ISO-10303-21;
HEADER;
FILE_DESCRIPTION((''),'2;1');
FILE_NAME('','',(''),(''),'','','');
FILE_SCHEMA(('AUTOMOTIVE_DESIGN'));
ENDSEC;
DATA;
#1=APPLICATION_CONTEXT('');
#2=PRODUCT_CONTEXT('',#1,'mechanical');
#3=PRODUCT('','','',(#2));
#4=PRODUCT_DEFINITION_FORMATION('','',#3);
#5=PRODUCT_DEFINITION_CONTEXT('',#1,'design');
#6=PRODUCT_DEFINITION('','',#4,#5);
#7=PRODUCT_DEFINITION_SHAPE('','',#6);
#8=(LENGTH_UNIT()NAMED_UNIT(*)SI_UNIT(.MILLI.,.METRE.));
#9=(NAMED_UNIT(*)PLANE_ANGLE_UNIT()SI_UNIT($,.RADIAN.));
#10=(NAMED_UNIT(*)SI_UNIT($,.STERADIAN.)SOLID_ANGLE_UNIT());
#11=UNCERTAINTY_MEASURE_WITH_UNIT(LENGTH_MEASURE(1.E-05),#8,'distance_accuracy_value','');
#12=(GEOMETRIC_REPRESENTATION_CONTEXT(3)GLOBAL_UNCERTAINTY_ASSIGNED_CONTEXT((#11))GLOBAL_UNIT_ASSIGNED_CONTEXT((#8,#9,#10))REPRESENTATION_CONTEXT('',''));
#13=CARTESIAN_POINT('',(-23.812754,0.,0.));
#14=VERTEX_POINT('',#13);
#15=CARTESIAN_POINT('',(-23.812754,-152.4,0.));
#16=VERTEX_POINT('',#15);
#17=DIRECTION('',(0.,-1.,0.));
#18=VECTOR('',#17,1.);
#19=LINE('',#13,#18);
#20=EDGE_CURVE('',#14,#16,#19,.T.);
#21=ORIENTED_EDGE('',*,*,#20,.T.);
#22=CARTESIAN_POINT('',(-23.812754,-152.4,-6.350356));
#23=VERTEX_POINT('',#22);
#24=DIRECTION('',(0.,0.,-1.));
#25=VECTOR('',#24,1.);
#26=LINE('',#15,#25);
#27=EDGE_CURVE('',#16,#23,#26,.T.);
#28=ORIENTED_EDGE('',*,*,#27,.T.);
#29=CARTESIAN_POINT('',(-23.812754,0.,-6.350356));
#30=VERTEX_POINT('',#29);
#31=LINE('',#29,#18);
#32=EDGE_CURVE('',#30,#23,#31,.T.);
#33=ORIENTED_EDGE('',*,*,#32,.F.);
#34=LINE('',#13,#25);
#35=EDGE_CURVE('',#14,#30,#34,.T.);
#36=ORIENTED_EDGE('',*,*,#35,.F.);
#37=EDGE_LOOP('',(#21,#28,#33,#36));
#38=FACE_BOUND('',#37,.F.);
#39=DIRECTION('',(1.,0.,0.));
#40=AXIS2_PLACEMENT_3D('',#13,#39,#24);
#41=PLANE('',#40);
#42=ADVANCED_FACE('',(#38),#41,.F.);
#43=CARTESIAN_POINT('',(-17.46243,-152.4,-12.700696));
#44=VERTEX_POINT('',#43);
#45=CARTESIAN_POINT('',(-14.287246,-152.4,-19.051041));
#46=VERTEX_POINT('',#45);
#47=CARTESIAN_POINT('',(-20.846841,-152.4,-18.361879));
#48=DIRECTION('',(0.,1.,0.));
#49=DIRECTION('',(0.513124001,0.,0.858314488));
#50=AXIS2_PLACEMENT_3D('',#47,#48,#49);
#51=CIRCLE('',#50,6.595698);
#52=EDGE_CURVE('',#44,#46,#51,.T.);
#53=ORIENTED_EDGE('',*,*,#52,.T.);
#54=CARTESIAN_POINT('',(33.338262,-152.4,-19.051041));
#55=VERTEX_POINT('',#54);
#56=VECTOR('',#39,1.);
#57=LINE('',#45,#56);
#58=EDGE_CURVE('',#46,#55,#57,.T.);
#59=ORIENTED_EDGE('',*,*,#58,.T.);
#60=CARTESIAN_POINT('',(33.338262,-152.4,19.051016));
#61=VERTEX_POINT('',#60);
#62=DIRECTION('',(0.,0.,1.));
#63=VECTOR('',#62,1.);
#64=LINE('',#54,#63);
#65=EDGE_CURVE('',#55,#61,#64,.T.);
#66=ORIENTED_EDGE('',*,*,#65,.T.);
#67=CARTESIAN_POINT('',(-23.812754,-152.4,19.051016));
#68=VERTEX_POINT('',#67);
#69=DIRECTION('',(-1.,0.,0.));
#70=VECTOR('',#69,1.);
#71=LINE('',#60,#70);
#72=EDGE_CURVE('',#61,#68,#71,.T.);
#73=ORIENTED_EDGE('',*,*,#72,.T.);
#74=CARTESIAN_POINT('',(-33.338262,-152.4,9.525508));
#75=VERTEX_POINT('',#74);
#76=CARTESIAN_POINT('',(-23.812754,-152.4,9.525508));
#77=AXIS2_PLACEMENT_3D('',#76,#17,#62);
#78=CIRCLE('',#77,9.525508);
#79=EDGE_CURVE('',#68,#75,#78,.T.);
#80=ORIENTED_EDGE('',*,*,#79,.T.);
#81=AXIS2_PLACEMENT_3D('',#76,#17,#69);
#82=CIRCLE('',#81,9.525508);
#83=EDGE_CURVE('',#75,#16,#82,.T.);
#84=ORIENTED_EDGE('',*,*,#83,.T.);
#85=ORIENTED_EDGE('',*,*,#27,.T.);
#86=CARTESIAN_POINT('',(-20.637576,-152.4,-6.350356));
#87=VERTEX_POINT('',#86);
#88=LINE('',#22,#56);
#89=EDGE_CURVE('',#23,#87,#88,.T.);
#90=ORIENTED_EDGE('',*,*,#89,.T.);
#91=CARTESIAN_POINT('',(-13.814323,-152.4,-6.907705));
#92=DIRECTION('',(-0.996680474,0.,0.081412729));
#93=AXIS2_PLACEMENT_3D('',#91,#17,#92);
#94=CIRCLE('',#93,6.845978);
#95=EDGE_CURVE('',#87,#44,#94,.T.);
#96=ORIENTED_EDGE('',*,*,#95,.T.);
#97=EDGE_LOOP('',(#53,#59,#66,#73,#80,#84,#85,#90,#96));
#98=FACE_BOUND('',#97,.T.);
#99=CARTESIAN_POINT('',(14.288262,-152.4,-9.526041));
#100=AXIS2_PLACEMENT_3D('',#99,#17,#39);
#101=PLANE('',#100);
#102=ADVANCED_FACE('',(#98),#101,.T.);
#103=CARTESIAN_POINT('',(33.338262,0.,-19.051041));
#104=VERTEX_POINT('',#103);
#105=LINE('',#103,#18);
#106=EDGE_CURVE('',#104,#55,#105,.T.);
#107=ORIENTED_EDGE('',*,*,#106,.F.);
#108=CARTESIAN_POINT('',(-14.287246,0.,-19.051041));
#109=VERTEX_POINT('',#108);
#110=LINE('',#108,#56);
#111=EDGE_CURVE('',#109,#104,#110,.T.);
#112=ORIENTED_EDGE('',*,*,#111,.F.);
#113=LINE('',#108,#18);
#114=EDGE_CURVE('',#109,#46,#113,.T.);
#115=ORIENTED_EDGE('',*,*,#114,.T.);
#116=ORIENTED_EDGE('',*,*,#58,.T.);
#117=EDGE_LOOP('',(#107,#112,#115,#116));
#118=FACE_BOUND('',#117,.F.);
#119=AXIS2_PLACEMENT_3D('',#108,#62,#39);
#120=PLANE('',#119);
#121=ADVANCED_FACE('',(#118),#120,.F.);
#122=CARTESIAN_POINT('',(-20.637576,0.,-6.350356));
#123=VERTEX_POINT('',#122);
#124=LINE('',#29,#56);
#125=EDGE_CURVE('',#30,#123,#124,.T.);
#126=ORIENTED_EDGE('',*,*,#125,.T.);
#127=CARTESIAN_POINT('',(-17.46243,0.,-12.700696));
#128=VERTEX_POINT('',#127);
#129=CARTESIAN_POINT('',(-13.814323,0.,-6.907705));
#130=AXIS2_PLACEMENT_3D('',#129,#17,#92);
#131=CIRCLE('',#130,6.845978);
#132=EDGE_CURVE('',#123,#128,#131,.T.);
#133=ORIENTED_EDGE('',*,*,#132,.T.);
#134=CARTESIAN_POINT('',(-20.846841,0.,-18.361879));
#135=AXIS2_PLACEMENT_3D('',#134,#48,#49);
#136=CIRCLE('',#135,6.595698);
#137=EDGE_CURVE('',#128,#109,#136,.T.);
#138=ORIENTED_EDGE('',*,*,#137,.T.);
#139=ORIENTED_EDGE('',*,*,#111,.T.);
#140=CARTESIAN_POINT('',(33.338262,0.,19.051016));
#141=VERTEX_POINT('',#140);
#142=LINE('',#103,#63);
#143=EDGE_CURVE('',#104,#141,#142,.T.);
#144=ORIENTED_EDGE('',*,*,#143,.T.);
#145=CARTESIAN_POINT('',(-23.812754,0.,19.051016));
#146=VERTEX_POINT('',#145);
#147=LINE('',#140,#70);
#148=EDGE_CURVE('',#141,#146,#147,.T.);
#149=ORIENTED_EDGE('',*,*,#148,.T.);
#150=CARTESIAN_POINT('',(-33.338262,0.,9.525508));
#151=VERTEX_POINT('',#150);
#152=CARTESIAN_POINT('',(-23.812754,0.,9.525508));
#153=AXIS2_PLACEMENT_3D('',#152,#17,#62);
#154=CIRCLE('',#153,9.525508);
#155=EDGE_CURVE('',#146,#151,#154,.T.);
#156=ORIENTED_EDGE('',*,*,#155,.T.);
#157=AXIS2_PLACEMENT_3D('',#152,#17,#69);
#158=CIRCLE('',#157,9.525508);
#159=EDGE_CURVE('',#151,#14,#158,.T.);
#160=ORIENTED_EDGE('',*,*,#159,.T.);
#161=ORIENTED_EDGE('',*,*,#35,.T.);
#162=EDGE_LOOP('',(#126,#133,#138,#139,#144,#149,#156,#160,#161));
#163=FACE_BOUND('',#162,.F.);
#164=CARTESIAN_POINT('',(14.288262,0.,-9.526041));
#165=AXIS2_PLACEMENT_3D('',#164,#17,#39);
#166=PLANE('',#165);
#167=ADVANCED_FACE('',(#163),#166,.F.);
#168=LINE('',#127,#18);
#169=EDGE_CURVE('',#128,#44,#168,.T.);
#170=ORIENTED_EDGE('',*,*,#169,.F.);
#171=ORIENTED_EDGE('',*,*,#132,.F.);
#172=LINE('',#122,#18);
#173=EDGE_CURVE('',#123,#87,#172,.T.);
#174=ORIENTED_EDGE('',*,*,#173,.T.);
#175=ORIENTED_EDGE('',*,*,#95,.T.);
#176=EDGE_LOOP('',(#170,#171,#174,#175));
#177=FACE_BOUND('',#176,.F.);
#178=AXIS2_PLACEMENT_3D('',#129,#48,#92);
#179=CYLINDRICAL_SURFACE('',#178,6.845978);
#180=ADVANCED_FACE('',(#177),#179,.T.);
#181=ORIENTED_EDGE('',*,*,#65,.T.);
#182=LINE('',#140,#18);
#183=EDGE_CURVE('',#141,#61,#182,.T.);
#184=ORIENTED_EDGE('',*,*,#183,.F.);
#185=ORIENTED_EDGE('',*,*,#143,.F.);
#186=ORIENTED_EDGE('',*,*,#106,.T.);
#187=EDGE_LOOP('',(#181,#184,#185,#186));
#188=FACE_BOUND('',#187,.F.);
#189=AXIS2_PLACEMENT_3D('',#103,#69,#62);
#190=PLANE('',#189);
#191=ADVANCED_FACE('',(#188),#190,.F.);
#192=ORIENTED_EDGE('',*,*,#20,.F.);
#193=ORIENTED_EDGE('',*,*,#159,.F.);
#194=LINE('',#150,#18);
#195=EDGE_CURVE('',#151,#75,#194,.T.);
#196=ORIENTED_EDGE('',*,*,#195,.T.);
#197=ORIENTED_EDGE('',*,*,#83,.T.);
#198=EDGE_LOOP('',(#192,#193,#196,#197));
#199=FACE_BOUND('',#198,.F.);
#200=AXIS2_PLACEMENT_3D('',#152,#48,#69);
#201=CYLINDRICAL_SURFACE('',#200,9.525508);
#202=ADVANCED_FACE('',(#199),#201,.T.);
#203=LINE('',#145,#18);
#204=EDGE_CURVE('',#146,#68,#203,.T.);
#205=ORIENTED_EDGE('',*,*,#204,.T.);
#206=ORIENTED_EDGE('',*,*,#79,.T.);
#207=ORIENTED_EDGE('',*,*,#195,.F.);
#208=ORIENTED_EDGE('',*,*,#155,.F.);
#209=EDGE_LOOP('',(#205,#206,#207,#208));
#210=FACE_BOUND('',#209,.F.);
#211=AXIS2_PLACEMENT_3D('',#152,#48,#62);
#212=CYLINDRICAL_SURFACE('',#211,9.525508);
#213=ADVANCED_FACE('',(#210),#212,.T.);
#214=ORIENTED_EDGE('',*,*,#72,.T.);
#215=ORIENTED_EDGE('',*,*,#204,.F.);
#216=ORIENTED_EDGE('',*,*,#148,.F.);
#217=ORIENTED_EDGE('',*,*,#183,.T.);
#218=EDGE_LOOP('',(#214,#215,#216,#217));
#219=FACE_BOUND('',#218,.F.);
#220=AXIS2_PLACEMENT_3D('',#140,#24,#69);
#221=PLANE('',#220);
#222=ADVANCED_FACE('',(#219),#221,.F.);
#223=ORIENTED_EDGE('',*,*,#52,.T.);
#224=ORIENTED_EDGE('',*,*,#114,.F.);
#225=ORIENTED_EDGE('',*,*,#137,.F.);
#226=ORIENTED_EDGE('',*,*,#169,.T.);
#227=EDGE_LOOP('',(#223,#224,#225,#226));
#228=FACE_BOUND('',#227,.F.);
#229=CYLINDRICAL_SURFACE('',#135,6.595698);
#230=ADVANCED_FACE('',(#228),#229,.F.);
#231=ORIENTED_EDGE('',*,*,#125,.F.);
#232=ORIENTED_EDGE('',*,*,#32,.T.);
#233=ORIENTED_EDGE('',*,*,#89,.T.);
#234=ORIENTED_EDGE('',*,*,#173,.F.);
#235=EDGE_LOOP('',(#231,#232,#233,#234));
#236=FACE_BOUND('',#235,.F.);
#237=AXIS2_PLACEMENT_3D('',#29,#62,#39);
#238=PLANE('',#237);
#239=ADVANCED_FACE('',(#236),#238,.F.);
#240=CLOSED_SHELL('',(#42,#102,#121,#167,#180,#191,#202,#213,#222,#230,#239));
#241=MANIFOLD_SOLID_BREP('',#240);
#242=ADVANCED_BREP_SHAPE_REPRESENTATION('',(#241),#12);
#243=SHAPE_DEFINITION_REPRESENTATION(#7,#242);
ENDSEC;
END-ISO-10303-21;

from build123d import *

# Parameters (mm, degrees)
F0_W     = 38.1
F0_H     = 19.05
F0_H_2   = 19.0520574
F1_DEPTH = 152.4


# Not quite as in the source:
# - ends of sketch curves that miss each other by under 0.0002 mm in the source are joined


with BuildPart() as f1:
    # F0 (on Front) → F1 (new body)
    with BuildSketch(Plane.XZ):
        with Locations((14.288262, -9.5260414)):
            Rectangle(F0_W, F0_H)
        with BuildLine():
            Line((-14.287246, -19.0510414), (-4.761738, -19.0510414))
            Line((-4.761738, -19.0510414), (-4.761738, -0.0010414))
            Line((-4.761738, -0.0010414), (-4.761738, 19.051016))
            Line((-4.761738, 19.051016), (-23.812754, 19.051016))
            ThreePointArc((-23.812754, 19.051016), (-30.548305301, 16.261059301), (-33.338262, 9.525508))
            ThreePointArc((-33.338262, 9.525508), (-30.548305301, 2.789956699), (-23.812754, 0))
            Line((-23.812754, 0), (-23.812754, -6.3503556))
            Line((-23.812754, -6.3503556), (-20.6375762, -6.3503556))
            ThreePointArc((-20.6375762, -6.3503556), (-19.9375622279, -9.969300362), (-17.4624299923, -12.700695633))
            ThreePointArc((-17.4624299923, -12.700695633), (-14.947472994, -15.4121856415), (-14.287246, -19.0510414))
        make_face()
        with Locations((14.288262, 9.5249873)):
            Rectangle(F0_W, F0_H_2)
    extrude(amount=F1_DEPTH)


solid = f1.part
